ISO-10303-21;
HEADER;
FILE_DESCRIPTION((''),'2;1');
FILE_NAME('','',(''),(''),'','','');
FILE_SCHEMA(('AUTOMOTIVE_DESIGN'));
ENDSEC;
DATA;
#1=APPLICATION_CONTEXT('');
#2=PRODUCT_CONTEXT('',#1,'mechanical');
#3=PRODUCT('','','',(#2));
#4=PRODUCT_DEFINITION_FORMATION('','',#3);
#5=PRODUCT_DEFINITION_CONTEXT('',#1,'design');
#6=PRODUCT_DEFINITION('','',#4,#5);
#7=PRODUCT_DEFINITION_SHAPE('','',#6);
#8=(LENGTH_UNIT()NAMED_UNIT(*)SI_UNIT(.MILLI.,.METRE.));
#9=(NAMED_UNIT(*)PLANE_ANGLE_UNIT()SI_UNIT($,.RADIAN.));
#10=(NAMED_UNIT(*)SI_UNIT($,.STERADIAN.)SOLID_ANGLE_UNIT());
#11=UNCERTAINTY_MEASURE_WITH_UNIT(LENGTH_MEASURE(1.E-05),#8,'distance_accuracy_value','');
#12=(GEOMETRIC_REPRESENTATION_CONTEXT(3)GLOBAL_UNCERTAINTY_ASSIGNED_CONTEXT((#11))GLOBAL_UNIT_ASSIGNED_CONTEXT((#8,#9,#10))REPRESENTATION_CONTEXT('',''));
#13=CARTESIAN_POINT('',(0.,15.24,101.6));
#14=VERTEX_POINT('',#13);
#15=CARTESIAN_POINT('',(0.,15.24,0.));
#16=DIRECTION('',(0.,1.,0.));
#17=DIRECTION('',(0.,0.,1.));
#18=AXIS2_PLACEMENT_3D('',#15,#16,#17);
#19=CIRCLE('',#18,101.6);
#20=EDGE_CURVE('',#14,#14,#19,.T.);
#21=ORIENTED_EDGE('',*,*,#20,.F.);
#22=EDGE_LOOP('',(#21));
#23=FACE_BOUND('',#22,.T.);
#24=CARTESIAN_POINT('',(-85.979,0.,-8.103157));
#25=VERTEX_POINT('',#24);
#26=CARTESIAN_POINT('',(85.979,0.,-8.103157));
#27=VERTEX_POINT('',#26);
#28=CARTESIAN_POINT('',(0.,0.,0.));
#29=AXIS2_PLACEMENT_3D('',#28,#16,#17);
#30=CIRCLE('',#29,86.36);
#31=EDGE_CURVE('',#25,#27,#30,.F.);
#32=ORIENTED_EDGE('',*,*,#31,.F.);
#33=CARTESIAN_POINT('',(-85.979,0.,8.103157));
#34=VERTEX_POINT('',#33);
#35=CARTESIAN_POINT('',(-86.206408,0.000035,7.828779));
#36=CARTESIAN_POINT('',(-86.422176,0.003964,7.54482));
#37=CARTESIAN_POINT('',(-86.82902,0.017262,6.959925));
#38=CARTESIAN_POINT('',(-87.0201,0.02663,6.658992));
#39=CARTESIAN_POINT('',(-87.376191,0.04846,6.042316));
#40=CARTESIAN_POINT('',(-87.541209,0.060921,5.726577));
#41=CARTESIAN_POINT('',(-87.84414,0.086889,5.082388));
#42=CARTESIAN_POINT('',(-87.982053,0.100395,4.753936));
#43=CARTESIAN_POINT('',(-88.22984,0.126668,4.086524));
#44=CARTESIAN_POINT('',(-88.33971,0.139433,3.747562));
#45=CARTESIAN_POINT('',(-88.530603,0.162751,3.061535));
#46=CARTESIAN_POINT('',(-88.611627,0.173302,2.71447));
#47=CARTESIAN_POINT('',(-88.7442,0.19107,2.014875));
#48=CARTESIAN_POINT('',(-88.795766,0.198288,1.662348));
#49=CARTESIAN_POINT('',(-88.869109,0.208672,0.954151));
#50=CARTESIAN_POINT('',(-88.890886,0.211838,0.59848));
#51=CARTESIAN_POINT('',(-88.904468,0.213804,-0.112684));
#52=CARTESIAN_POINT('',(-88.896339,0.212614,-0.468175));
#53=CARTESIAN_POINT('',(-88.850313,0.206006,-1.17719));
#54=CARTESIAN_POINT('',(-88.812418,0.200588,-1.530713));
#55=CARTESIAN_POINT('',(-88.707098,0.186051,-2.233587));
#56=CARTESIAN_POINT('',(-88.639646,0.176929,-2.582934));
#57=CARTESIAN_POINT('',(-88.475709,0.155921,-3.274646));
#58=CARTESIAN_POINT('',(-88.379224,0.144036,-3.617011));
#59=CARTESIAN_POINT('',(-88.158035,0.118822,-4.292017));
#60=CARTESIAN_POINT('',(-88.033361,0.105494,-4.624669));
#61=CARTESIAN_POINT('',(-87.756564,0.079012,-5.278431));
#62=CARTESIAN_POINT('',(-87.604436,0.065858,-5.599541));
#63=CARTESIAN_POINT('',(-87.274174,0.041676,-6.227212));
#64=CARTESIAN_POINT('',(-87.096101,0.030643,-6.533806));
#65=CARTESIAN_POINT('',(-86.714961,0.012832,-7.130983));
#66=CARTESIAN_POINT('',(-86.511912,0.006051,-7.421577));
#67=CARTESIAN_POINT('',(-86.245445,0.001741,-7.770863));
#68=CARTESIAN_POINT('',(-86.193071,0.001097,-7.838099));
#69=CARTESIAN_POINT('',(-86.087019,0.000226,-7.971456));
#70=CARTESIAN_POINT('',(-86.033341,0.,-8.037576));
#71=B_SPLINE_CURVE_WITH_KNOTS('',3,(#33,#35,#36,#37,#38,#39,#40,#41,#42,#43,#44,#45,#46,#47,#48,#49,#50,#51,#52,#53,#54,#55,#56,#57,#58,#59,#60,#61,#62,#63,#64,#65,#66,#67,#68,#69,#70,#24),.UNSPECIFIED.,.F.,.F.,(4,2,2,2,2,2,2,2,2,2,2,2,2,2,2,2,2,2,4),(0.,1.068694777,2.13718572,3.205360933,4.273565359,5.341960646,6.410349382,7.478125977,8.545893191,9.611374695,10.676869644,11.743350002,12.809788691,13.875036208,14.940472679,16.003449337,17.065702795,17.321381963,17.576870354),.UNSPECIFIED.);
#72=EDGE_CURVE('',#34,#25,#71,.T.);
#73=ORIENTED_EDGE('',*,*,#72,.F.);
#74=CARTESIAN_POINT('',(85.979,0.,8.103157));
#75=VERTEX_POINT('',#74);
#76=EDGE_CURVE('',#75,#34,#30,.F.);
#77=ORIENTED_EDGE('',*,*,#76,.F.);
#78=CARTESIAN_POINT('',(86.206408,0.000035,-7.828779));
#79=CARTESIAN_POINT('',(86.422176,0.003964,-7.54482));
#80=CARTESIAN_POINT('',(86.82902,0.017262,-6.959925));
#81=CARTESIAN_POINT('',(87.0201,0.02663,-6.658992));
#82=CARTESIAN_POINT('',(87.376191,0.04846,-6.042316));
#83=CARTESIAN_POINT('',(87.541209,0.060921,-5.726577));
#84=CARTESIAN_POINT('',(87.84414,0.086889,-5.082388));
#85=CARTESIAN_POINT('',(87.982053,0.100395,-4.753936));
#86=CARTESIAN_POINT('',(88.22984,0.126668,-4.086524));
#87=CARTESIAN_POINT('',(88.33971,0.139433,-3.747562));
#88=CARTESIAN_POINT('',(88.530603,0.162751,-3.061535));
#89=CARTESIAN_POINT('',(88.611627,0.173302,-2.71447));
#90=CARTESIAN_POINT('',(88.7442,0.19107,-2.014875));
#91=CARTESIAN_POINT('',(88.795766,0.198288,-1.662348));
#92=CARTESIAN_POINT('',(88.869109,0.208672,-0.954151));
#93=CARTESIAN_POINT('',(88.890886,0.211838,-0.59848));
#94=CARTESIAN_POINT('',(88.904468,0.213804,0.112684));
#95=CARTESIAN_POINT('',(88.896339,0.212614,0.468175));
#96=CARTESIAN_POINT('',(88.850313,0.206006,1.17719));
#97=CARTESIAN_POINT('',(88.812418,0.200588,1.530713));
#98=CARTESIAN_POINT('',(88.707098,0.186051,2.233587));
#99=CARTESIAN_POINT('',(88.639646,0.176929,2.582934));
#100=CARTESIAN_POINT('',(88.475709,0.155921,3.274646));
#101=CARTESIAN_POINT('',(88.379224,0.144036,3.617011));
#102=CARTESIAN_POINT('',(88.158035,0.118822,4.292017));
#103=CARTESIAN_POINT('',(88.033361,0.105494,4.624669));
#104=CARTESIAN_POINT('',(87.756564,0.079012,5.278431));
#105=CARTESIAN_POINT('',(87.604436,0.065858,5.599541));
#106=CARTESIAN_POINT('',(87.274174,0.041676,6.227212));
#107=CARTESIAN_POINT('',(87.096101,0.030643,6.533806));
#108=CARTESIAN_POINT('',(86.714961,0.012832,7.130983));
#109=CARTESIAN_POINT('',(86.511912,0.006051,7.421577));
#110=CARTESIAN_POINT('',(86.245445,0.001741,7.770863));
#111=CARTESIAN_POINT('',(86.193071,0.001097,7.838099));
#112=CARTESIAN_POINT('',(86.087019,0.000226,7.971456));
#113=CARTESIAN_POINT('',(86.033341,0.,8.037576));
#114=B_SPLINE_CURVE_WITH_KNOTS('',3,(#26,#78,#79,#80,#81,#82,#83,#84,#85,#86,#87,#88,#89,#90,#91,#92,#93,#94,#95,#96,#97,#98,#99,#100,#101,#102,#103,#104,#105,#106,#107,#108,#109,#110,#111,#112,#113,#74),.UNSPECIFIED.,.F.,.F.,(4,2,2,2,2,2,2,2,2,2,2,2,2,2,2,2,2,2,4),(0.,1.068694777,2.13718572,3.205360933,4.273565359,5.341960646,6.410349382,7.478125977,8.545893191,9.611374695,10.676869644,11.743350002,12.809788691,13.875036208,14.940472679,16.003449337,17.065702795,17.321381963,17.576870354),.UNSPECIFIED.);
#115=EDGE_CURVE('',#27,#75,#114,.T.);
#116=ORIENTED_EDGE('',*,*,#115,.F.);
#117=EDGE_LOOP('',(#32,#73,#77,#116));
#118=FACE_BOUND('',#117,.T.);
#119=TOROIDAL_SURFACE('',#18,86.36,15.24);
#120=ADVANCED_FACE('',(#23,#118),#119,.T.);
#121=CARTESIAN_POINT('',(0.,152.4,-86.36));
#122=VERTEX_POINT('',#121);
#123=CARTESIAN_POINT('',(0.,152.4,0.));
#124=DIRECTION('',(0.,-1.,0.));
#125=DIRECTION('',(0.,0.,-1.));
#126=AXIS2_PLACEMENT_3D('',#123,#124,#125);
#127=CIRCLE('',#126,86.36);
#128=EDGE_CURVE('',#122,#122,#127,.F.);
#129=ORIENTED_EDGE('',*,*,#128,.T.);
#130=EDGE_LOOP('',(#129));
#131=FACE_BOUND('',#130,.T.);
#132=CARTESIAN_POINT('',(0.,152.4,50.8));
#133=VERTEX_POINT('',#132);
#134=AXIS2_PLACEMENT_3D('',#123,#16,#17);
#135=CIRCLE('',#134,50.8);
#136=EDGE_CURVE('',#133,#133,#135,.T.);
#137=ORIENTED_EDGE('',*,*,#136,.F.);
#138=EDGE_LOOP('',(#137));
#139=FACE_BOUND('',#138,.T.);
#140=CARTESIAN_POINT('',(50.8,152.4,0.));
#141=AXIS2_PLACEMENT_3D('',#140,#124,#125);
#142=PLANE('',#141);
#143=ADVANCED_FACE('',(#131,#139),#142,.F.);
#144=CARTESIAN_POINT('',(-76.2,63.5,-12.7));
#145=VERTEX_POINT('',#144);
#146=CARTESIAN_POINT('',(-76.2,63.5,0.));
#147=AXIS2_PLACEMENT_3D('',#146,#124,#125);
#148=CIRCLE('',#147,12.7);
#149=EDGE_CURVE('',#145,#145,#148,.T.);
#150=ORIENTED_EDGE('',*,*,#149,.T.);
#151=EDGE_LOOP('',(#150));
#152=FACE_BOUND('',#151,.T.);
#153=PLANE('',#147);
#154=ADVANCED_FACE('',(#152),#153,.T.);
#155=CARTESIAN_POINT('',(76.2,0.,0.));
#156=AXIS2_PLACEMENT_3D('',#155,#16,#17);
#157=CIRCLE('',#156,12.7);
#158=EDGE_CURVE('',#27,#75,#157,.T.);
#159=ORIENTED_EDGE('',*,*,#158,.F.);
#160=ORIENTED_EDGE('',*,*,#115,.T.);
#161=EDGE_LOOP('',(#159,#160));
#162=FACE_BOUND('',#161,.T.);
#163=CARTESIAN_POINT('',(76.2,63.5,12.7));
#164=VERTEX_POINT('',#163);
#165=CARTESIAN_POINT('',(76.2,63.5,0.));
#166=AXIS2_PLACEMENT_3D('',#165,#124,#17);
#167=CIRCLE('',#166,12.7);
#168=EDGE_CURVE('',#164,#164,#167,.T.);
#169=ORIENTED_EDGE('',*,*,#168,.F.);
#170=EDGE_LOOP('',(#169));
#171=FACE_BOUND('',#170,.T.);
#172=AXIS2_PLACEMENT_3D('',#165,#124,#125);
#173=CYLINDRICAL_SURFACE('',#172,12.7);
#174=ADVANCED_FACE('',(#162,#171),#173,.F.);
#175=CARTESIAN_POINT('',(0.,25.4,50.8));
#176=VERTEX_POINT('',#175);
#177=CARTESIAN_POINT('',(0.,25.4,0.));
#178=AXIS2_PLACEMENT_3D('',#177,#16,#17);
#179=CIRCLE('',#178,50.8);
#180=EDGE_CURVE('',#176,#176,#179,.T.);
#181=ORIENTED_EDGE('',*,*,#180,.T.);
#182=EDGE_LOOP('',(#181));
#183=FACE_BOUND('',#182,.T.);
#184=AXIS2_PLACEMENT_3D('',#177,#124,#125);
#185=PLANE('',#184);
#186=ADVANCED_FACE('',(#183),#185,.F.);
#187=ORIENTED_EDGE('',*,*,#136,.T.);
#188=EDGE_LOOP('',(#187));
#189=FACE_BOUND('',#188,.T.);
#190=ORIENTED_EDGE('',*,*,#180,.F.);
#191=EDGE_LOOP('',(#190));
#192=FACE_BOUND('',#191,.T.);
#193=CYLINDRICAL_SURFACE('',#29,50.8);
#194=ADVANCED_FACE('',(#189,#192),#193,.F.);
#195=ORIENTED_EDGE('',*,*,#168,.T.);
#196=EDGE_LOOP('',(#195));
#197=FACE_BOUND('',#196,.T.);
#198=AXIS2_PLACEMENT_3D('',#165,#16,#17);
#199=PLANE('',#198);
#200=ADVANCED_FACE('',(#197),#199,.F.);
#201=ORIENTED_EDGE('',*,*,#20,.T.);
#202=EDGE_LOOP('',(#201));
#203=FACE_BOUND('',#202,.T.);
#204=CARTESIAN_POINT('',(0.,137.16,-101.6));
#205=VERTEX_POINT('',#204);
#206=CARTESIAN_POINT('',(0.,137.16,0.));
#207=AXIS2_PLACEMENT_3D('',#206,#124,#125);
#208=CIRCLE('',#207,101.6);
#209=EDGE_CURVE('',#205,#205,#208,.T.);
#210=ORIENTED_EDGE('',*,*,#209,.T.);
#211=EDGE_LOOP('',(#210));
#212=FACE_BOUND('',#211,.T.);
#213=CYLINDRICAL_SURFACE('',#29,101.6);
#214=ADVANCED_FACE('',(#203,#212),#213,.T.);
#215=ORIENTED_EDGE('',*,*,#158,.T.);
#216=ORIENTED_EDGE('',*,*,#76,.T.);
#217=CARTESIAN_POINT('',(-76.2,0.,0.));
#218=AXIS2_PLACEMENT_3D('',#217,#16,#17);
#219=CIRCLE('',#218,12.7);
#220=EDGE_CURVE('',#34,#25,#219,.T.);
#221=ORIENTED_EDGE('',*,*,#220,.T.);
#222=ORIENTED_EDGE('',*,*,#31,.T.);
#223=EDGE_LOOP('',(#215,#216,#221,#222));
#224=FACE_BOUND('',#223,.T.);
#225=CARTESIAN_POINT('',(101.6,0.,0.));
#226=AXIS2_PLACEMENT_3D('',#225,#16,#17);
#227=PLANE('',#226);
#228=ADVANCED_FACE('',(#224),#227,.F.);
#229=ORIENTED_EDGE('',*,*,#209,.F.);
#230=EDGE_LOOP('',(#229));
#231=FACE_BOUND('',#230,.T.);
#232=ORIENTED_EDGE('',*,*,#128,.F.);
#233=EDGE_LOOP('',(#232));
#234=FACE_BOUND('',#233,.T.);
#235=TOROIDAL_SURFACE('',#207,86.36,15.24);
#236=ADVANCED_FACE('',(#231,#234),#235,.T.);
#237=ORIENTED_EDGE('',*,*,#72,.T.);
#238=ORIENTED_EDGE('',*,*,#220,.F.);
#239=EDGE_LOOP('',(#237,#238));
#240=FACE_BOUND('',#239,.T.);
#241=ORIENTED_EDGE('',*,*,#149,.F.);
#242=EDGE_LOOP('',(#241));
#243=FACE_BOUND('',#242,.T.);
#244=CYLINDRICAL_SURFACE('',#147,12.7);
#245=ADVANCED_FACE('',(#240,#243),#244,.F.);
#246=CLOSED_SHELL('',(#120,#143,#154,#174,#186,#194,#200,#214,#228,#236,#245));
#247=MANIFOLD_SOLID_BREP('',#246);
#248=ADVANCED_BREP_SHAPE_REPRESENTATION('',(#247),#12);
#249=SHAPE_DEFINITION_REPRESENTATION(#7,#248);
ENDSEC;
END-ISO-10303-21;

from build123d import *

# Parameters (mm, degrees)
CUT_EXTRUDE1_START = 12.7
SKETCH2_R          = 12.7
CUT_EXTRUDE1_DEPTH = 76.2
FILLET2_R          = 15.24


with BuildPart() as part:
    # Sketch1 → Revolve1 (revolve)
    with BuildSketch(Plane.XY, mode=Mode.PRIVATE) as revolve1_sk:
        Polygon((0, 0), (0, 25.4), (50.8, 25.4), (50.8, 152.4), (101.6, 152.4), (101.6, 0), align=None)
    revolve(revolve1_sk.sketch.rotate(Axis((0, 0, 0), (0, 1, 0)), 270), axis=Axis((0, 0, 0), (0, 1, 0)))

    # Sketch2 → Cut-Extrude1 (cut)
    with BuildSketch(Plane.XZ.offset(CUT_EXTRUDE1_START)):
        with Locations(Location((-76.2, 0, 0), (0, 0, 270))):
            Circle(SKETCH2_R)
        with Locations(Location((76.2, 0, 0), (0, 0, 270))):
            Circle(SKETCH2_R)
    extrude(amount=-CUT_EXTRUDE1_DEPTH, mode=Mode.SUBTRACT)

    # Fillet2
    # the kernel refuses this fillet: 15.24 mm, written as the material it takes off along each edge
    with BuildSketch(Plane(origin=(0, 0, 0), x_dir=(0, 0, 1), z_dir=(-1, 0, 0))) as fillet2_piece_1:
        with BuildLine():
            CenterArc((101.6 - FILLET2_R, FILLET2_R), FILLET2_R, 270, 90)
            Line((101.6 - FILLET2_R, 0), (101.6, 0))
            Line((101.6, 0), (101.6, FILLET2_R))
        make_face()
    revolve(axis=Axis((0, 0, 0), (0, 1, 0)), mode=Mode.SUBTRACT)
    with BuildSketch(Plane(origin=(0, 152.4, 0), x_dir=(0, 0, 1), z_dir=(-1, 0, 0))) as fillet2_piece_2:
        with BuildLine():
            CenterArc((101.6 - FILLET2_R, -FILLET2_R), FILLET2_R, 0, 90)
            Line((101.6, -FILLET2_R), (101.6, 0))
            Line((101.6, 0), (101.6 - FILLET2_R, 0))
        make_face()
    revolve(axis=Axis((0, 152.4, 0), (0, 1, 0)), mode=Mode.SUBTRACT)


solid = part.part
